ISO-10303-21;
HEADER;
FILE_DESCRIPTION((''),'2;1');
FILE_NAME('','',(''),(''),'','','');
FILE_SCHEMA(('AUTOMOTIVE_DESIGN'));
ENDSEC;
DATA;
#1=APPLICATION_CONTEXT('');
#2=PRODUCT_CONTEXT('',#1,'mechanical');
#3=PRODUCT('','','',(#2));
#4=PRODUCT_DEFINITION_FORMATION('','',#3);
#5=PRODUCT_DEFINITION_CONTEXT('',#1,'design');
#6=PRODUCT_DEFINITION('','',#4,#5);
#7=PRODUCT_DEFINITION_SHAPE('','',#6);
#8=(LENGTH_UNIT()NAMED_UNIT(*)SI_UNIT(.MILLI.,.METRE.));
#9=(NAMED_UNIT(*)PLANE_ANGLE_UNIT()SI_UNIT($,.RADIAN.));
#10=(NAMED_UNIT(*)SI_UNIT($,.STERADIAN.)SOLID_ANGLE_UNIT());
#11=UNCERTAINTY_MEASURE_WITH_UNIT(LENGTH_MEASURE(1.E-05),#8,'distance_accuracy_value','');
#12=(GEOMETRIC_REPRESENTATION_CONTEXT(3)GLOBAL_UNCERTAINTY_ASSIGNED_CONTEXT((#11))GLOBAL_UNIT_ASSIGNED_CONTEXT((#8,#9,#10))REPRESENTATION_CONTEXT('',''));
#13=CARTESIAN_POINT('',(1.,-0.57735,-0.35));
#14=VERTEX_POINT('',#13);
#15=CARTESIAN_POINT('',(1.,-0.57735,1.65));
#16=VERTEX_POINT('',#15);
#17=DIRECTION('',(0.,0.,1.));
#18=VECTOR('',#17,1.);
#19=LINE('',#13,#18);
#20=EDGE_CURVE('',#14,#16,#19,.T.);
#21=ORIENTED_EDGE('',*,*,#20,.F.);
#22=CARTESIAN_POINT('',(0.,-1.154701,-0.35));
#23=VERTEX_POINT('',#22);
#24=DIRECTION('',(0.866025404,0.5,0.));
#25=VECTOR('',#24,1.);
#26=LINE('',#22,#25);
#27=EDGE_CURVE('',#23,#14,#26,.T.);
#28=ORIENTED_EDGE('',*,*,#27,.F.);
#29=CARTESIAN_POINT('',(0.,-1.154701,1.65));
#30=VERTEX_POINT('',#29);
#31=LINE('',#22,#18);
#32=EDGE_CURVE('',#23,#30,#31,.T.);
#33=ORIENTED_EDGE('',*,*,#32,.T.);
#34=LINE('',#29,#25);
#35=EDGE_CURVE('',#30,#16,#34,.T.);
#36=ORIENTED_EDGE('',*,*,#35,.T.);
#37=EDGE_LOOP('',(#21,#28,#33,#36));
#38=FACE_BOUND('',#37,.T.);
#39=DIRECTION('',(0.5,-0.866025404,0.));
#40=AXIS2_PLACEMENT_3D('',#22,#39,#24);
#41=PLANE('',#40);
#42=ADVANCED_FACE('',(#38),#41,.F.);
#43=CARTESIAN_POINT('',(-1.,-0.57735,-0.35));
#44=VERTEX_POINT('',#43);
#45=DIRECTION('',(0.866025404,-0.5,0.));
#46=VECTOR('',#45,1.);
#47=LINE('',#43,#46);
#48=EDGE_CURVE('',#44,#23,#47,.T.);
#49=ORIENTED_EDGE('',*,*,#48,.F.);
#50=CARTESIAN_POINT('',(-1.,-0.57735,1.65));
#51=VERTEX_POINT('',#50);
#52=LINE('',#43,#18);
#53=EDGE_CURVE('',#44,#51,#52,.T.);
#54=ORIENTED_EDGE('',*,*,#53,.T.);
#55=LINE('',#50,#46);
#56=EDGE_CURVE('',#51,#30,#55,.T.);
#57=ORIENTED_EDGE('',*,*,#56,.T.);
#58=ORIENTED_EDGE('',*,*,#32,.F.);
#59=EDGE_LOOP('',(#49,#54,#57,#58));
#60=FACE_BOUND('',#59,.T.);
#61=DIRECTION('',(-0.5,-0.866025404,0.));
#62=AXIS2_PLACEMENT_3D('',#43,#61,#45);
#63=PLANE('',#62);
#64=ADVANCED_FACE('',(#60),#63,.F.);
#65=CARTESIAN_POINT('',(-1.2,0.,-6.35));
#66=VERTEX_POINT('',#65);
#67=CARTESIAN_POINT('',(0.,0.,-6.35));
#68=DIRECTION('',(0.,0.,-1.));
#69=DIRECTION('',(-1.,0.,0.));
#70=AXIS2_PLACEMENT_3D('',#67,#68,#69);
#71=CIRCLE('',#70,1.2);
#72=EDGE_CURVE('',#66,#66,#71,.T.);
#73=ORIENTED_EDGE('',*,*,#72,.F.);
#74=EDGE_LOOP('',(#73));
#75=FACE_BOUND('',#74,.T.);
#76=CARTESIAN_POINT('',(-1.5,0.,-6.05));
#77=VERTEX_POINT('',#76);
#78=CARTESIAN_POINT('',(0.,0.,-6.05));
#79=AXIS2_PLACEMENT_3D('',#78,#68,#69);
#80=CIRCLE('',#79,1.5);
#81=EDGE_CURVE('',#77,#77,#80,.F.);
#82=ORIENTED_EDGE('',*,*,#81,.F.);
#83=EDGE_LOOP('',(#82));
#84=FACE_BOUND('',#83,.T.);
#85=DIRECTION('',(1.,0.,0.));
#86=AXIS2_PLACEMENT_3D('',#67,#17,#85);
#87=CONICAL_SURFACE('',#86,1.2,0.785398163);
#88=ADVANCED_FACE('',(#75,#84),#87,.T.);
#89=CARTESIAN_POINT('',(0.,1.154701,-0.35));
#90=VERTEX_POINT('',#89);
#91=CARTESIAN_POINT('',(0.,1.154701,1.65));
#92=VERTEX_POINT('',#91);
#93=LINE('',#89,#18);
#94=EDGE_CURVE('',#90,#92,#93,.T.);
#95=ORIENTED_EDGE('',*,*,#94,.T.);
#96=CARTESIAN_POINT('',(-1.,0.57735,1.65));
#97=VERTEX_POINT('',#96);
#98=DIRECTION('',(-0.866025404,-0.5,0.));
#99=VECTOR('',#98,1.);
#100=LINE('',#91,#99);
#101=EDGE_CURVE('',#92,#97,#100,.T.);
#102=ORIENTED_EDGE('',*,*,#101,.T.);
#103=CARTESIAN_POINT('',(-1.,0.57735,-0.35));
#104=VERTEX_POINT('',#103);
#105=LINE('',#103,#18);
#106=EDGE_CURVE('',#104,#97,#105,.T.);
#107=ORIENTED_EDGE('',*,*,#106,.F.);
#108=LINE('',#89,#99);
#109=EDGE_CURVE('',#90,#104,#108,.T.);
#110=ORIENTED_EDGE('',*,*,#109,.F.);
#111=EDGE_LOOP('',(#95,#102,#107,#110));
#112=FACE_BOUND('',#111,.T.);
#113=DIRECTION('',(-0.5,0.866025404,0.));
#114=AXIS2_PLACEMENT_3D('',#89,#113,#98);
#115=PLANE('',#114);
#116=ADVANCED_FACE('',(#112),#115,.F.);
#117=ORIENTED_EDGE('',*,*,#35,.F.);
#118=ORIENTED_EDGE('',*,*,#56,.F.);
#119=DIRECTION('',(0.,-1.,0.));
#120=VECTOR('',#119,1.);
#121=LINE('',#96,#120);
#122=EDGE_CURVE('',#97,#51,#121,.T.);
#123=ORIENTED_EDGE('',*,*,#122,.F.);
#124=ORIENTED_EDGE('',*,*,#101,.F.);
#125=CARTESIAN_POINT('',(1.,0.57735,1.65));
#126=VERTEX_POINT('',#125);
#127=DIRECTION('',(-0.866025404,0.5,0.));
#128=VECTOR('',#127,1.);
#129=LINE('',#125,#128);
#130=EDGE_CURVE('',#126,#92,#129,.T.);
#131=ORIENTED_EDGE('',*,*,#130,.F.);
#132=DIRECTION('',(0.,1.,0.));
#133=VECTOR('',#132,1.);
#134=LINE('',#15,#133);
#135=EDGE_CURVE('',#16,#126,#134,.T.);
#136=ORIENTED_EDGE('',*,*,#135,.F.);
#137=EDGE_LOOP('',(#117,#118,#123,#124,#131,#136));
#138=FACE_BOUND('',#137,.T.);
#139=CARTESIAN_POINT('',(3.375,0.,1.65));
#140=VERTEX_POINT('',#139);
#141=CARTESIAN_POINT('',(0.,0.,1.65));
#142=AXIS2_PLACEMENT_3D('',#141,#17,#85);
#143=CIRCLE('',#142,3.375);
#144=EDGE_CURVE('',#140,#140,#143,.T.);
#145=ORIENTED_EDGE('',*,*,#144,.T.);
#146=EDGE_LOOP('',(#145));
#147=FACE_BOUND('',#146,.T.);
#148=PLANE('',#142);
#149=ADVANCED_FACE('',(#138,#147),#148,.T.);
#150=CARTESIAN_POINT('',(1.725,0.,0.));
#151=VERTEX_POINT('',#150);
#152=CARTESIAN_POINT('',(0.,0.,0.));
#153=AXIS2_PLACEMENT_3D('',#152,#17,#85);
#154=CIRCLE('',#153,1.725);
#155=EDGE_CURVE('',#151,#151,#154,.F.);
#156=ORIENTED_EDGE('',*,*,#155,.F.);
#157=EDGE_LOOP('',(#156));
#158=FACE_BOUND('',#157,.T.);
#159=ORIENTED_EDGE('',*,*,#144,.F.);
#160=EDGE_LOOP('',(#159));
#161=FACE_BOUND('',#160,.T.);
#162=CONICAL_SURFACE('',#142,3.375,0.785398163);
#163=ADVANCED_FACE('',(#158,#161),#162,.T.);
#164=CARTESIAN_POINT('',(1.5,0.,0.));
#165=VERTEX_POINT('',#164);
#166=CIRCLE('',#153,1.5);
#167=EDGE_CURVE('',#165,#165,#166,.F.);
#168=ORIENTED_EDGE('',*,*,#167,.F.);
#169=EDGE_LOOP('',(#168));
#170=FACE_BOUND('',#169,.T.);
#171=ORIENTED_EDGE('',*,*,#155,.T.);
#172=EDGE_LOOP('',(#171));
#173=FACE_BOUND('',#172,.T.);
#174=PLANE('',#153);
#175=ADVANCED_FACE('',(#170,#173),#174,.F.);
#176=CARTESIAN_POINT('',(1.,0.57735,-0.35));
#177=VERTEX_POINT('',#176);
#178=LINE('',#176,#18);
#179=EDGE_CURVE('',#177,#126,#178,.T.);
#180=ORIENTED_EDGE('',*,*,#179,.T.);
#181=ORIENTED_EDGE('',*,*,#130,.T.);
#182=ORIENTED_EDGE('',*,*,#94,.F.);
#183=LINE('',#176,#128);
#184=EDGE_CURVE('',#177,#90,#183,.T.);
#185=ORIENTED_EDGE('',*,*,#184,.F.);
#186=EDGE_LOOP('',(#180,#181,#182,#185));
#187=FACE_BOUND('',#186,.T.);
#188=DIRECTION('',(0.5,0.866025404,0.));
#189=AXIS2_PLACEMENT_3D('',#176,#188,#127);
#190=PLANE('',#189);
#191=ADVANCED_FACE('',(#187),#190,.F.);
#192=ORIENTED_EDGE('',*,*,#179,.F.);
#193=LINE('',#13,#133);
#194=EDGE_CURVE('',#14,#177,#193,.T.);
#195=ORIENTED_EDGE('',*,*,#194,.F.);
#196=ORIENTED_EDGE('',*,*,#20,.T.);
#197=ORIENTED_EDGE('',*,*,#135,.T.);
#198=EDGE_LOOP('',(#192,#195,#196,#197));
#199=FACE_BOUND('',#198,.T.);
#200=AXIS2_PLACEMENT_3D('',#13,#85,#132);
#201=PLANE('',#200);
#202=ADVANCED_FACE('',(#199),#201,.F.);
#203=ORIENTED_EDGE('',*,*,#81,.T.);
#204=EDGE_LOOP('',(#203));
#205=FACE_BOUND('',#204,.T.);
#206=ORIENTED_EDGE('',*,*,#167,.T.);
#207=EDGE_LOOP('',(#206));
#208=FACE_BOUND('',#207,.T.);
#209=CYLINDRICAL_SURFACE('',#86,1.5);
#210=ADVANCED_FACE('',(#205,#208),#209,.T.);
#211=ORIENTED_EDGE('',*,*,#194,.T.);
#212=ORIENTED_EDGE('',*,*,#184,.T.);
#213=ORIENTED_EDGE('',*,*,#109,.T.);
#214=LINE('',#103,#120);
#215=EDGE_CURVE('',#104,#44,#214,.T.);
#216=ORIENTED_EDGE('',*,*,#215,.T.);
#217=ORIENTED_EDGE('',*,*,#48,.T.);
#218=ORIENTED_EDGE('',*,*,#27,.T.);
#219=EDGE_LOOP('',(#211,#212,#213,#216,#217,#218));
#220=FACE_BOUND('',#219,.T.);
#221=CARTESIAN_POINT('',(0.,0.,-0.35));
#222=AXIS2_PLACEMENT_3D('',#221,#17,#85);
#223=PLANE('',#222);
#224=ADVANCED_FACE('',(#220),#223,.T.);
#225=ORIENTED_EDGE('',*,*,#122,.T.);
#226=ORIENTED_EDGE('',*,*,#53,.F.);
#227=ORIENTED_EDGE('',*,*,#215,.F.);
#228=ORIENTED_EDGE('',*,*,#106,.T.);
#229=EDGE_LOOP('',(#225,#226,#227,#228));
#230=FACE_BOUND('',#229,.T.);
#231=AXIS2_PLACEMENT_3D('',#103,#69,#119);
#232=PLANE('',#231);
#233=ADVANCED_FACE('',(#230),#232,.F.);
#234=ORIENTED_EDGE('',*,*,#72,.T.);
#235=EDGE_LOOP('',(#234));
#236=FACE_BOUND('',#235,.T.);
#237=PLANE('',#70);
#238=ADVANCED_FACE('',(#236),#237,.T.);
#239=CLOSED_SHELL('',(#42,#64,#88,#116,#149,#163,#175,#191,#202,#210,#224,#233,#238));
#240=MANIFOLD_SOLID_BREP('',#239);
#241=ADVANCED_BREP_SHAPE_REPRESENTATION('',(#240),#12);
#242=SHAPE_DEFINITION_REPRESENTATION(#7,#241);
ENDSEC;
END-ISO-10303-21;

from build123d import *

# Parameters (mm, degrees)
SKETCH1_R           = 3.375
BOSS_EXTRUDE1_DEPTH = 1.65
SKETCH2_R           = 1.5
BOSS_EXTRUDE2_DEPTH = 6.35
CHAMFER1_SIZE       = 0.3
CUT_EXTRUDE1_DEPTH  = 2
CHAMFER2_SIZE       = 1.65


with BuildPart() as part:
    # Sketch1 → Boss-Extrude1 (new body)
    with BuildSketch(Plane.XY):
        Circle(SKETCH1_R)
    extrude(amount=BOSS_EXTRUDE1_DEPTH)

    # Sketch2 → Boss-Extrude2 (add)
    with BuildSketch(Plane(origin=(0, 0, 0), x_dir=(-1, 0, 0), z_dir=(0, 0, -1))):
        with Locations(Location((0, 0, 0), (0, 0, 180))):
            Circle(SKETCH2_R)
    extrude(amount=BOSS_EXTRUDE2_DEPTH)

    # Chamfer1
    chamfer1_edges = [part.edges().sort_by_distance(p)[0] for p in [
        (-1.5, 0, -6.35),
    ]]
    chamfer(chamfer1_edges, length=CHAMFER1_SIZE)

    # Sketch3 → Cut-Extrude1 (cut)
    with BuildSketch(Plane.XY.offset(1.65)):
        Polygon((0, 1.154700538), (-1, 0.577350269), (-1, -0.577350269), (0, -1.154700538), (1, -0.577350269), (1, 0.577350269), align=None)
    extrude(amount=-CUT_EXTRUDE1_DEPTH, mode=Mode.SUBTRACT)

    # Chamfer2
    chamfer2_edges = [part.edges().sort_by_distance(p)[0] for p in [
        (-3.375, 0, 0),
    ]]
    chamfer(chamfer2_edges, length=CHAMFER2_SIZE - 0.0001)  # a hair under: the kernel refuses the full size


solid = part.part
